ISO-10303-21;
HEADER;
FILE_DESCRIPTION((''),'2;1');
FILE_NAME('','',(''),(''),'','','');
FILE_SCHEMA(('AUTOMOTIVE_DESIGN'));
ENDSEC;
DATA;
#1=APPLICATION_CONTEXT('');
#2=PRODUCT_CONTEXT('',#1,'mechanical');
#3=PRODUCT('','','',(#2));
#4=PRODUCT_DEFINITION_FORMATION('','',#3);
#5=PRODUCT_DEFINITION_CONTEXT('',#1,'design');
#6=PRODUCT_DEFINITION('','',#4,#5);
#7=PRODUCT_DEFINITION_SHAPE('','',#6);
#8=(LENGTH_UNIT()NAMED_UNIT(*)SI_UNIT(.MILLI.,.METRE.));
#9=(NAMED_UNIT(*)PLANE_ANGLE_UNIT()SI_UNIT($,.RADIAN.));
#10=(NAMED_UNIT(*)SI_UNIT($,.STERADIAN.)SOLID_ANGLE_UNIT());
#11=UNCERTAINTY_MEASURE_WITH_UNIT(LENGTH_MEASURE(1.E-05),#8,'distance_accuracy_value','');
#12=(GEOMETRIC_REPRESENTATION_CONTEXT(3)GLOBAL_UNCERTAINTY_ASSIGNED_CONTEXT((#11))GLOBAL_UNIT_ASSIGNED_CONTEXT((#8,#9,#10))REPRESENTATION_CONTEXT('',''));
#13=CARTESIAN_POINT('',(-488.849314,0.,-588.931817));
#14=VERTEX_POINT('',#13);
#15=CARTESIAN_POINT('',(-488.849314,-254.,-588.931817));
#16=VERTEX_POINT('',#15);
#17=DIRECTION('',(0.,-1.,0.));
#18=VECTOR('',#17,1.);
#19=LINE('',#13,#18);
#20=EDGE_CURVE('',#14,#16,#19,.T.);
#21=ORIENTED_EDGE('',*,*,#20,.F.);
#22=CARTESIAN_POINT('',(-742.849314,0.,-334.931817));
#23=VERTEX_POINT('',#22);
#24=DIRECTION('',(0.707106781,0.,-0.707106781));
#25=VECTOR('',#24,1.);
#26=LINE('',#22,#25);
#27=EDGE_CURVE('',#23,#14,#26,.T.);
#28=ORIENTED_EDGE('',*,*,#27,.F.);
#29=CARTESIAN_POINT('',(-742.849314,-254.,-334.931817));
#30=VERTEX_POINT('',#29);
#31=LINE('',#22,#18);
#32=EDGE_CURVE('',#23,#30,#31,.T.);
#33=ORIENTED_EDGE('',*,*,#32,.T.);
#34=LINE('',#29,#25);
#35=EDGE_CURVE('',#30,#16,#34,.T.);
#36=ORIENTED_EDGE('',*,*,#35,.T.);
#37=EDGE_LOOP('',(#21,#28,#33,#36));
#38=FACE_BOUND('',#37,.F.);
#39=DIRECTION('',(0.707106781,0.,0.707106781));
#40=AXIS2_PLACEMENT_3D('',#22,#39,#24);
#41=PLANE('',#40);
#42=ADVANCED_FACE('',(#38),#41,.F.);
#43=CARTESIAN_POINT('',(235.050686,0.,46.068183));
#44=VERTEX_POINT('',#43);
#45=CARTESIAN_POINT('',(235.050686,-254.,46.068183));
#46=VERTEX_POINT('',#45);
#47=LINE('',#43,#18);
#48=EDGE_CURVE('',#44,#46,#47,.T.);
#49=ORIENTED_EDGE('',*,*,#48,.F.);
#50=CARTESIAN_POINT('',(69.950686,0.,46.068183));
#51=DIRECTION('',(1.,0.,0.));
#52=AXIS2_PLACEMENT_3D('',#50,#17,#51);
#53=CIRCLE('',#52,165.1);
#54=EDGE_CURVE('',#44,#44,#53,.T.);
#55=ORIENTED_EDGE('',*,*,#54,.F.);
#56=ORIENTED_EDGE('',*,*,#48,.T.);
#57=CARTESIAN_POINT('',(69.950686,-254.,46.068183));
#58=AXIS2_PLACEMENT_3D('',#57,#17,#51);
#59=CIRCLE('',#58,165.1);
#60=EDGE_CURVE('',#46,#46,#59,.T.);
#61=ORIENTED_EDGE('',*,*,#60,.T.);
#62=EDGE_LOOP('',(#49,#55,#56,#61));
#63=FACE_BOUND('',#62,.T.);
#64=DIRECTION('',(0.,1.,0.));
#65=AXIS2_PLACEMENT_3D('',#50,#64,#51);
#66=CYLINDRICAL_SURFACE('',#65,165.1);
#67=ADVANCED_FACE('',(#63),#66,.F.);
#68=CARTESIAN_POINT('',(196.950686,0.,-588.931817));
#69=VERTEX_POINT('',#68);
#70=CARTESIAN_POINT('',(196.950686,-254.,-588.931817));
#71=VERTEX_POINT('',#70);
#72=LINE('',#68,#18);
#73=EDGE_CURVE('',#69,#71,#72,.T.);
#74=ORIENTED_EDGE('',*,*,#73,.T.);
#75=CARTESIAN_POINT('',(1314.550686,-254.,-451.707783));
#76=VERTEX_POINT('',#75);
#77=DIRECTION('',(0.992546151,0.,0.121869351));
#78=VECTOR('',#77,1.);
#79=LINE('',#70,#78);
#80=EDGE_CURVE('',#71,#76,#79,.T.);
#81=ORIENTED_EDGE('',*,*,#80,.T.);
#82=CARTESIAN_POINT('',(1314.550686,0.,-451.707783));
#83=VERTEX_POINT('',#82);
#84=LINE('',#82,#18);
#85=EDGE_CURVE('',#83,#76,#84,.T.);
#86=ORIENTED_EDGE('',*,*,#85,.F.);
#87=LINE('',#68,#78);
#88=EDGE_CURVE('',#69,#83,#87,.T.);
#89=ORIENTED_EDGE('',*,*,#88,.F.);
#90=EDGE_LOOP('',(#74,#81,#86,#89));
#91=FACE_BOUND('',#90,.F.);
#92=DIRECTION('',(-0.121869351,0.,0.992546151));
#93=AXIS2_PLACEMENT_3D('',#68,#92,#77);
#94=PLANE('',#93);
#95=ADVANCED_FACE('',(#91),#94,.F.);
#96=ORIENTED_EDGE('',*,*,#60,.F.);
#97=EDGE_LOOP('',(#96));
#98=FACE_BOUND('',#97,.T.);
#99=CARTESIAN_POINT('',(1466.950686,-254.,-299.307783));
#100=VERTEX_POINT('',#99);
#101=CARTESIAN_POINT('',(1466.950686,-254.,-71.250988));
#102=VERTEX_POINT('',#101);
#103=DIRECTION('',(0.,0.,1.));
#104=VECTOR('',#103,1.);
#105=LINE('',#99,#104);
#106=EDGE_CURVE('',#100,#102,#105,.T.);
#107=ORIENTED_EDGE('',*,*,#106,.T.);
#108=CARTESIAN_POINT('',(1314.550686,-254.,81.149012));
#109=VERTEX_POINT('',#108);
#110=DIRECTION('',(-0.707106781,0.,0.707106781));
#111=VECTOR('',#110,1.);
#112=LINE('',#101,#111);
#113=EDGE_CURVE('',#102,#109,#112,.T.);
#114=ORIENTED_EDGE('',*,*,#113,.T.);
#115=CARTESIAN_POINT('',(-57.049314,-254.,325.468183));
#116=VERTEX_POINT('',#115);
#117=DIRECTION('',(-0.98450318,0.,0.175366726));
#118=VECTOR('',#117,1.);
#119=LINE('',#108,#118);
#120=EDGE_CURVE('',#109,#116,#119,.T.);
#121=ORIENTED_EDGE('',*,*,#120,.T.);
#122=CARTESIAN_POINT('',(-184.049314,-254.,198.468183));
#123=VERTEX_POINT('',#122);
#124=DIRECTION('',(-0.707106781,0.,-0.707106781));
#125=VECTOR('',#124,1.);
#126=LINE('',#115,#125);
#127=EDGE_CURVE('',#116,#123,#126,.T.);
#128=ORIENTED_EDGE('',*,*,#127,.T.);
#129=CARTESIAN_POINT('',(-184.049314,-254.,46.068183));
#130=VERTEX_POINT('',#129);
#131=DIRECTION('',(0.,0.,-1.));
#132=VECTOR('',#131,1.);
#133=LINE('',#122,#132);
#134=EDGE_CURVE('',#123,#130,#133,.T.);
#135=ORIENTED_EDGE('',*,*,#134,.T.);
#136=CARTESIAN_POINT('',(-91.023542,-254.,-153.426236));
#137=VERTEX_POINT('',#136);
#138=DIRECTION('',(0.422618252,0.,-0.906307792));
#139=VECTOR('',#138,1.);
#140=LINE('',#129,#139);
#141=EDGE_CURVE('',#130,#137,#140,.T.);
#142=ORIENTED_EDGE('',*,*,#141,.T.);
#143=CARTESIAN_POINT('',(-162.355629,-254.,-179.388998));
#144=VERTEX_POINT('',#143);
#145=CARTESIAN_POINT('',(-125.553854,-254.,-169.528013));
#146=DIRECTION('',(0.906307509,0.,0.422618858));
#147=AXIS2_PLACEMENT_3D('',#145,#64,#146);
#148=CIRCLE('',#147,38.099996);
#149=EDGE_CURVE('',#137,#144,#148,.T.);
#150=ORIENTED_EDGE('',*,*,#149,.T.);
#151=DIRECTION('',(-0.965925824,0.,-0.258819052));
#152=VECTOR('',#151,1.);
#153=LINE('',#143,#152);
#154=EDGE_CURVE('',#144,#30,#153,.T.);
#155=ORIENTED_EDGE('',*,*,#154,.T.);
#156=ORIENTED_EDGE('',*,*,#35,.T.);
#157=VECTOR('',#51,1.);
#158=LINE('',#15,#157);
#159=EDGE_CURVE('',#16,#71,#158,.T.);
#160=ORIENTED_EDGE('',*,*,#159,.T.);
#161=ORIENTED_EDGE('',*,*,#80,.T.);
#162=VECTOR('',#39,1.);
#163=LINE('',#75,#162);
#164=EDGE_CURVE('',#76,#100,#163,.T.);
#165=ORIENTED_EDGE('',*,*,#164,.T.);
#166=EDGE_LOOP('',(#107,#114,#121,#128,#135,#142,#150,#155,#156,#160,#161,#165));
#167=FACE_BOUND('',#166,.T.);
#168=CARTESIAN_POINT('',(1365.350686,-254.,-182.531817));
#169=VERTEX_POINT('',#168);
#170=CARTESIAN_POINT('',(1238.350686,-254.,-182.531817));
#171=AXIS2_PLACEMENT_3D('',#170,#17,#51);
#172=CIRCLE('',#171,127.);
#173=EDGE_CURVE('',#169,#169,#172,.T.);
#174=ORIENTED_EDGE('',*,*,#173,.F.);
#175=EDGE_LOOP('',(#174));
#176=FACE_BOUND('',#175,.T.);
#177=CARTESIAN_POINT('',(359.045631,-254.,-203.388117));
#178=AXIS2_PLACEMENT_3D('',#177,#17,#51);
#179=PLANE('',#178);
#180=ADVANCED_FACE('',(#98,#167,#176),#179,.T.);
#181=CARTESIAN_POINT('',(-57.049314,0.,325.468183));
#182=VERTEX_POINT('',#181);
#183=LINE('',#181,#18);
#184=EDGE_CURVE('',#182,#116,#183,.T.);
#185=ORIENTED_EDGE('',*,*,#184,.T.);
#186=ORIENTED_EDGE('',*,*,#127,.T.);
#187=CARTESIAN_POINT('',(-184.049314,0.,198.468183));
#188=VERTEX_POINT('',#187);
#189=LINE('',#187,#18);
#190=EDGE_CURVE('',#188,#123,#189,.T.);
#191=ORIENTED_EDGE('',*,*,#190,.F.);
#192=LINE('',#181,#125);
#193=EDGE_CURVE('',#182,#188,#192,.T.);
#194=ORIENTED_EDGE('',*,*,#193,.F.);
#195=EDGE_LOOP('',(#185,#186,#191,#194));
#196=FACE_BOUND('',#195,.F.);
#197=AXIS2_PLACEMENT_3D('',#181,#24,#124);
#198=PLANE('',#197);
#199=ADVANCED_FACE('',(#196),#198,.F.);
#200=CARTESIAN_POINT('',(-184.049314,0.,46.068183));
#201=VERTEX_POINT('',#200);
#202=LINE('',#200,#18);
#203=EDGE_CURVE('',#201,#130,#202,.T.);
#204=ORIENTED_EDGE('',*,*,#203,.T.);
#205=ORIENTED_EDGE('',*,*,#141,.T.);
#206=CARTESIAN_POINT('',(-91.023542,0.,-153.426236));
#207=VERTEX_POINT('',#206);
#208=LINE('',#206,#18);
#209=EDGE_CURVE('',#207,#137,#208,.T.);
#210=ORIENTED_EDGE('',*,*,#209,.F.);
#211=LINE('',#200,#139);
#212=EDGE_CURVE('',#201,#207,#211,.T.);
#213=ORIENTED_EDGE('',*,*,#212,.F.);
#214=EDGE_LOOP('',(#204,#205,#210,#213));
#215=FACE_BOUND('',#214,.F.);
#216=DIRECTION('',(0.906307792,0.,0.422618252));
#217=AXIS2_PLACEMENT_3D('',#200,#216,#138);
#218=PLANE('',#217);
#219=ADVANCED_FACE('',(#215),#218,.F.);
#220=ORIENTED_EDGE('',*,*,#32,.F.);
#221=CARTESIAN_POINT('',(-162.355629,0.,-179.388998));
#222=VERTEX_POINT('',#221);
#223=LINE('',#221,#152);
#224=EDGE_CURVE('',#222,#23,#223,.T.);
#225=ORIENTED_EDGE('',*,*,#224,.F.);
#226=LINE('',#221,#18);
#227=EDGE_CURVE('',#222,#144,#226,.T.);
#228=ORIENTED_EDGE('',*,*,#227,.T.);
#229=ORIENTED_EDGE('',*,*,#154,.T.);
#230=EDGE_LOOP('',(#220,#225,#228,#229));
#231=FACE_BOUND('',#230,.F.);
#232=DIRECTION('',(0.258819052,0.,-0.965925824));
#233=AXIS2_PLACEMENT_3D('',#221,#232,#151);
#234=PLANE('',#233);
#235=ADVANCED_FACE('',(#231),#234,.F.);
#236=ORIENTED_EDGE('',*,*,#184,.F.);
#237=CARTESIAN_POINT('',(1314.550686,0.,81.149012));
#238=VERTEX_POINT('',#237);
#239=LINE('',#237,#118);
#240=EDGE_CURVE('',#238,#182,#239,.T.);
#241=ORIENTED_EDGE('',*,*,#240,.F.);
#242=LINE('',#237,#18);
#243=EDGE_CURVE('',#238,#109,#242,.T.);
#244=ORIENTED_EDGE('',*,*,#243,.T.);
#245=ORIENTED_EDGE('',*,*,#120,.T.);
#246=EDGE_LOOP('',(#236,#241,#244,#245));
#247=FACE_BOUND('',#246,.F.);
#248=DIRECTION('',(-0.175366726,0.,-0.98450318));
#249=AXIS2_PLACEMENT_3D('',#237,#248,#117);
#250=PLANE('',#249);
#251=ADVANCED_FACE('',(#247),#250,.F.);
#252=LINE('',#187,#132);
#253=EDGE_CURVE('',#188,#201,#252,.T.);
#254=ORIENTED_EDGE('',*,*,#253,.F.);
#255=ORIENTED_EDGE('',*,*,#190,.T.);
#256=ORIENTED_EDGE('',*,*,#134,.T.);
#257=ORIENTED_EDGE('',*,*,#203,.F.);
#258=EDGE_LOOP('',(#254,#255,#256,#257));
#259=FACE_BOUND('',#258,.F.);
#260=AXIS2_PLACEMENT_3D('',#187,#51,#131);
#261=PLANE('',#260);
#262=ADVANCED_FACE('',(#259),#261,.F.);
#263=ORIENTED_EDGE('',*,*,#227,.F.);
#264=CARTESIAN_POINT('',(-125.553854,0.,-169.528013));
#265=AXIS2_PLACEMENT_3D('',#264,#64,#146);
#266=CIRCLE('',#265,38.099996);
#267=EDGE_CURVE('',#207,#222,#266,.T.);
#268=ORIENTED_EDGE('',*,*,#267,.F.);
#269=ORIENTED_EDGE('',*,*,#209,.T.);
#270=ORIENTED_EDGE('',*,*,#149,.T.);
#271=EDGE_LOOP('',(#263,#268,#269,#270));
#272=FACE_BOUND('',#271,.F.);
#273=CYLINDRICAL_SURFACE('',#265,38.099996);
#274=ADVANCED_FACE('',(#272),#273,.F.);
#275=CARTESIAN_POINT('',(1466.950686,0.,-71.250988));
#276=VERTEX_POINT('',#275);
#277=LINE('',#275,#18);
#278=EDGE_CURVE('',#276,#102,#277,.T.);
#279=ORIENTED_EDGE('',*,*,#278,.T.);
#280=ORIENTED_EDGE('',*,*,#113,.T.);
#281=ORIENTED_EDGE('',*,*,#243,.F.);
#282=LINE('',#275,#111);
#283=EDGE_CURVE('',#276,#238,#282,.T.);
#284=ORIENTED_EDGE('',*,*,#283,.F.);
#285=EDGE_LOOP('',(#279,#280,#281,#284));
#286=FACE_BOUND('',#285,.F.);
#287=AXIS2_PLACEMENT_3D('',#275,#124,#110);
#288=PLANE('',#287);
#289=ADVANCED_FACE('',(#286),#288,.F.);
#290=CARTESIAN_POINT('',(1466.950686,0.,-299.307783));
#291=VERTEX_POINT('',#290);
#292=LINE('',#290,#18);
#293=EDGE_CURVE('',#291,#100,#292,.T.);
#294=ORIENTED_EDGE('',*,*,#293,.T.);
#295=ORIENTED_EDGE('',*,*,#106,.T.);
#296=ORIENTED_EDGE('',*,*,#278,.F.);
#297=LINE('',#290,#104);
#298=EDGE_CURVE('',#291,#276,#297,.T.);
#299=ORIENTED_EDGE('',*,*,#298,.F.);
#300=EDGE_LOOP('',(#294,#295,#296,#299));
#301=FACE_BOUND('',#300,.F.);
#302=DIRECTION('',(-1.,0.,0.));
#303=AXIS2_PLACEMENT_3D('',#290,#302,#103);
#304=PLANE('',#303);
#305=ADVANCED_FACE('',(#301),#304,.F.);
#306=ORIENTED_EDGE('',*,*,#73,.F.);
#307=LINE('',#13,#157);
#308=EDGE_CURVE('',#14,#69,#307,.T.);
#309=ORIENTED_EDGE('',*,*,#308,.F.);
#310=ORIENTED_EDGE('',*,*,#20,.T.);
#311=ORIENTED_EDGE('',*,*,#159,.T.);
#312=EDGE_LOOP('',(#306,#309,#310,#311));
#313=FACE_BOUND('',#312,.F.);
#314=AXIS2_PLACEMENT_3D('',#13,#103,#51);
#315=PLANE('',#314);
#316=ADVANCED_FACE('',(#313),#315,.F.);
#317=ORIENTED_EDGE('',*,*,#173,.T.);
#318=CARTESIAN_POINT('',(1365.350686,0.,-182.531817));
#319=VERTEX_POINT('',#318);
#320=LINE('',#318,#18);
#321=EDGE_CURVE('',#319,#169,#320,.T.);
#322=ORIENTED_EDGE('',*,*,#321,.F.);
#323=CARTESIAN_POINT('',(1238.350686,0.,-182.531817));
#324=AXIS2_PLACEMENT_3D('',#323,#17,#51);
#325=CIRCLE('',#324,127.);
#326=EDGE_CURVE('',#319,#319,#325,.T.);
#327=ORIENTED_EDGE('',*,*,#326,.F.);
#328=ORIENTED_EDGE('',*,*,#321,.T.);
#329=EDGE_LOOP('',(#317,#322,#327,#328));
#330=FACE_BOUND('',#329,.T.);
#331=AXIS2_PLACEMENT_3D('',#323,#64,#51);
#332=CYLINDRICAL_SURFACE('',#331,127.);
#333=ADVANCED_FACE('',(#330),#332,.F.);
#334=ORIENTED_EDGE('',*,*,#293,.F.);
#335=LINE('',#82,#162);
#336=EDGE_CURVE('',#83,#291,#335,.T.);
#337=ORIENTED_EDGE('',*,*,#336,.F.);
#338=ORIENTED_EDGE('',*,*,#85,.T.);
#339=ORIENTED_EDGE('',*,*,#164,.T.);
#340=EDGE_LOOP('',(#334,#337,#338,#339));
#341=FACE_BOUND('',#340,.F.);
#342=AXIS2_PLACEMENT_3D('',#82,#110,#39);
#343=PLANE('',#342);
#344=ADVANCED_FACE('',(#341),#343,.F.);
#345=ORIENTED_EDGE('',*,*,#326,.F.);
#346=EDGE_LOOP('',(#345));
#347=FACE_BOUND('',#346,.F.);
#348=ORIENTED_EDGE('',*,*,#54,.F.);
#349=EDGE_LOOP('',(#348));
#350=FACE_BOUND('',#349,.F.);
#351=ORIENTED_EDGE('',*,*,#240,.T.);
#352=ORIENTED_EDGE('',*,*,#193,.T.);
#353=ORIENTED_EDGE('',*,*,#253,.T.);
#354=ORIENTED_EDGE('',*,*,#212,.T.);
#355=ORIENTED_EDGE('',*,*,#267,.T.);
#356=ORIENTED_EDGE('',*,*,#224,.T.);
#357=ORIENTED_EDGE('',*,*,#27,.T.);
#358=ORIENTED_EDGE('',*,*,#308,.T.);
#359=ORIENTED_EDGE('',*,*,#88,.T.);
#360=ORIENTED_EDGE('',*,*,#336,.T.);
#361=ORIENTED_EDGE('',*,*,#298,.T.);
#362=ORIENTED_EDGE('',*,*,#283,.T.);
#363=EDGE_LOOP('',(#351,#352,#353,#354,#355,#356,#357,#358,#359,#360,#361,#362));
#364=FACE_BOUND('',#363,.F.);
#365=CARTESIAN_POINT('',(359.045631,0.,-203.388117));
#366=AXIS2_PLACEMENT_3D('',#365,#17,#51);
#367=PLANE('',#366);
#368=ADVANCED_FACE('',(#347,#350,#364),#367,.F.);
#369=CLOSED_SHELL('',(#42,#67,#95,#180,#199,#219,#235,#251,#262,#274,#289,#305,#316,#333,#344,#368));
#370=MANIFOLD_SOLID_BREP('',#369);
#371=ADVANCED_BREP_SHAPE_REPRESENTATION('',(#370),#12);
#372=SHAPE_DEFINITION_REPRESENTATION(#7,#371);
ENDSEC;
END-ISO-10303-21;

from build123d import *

# Parameters (mm, degrees)
F0_R     = 127
F0_R_2   = 165.1
F1_DEPTH = 254


# Not quite as in the source:
# - ends of sketch curves that miss each other by under 0.0002 mm in the source are joined


with BuildPart() as f1:
    # F0 (on Front) → F1 (new body)
    with BuildSketch(Plane.XZ):
        with BuildLine():
            Line((1314.5506856, -451.7077834), (1466.9506856, -299.3077834))
            Line((1466.9506856, -299.3077834), (1466.9506856, -71.2509878))
            Line((1466.9506856, -71.2509878), (1314.5506856, 81.1490122))
            Line((1314.5506856, 81.1490122), (-57.0493144, 325.4681832))
            Line((-57.0493144, 325.4681832), (-184.0493144, 198.4681832))
            Line((-184.0493144, 198.4681832), (-184.0493144, 46.0681832))
            Line((-184.0493144, 46.0681832), (-91.0235416, -153.4262362))
            ThreePointArc((-91.0235416, -153.4262362), (-112.5228808858, -205.3302952862), (-162.3556290296, -179.3889979113))
            Line((-162.3556290296, -179.3889979113), (-742.8493144, -334.9318168))
            Line((-742.8493144, -334.9318168), (-488.8493144, -588.9318168))
            Line((-488.8493144, -588.9318168), (196.9506856, -588.9318168))
            Line((196.9506856, -588.9318168), (1314.5506856, -451.7077834))
        make_face()
        with Locations((1238.3506856, -182.5318168)):
            Circle(F0_R, mode=Mode.SUBTRACT)
        with Locations((69.9506856, 46.0681832)):
            Circle(F0_R_2, mode=Mode.SUBTRACT)
    extrude(amount=F1_DEPTH)


solid = f1.part
